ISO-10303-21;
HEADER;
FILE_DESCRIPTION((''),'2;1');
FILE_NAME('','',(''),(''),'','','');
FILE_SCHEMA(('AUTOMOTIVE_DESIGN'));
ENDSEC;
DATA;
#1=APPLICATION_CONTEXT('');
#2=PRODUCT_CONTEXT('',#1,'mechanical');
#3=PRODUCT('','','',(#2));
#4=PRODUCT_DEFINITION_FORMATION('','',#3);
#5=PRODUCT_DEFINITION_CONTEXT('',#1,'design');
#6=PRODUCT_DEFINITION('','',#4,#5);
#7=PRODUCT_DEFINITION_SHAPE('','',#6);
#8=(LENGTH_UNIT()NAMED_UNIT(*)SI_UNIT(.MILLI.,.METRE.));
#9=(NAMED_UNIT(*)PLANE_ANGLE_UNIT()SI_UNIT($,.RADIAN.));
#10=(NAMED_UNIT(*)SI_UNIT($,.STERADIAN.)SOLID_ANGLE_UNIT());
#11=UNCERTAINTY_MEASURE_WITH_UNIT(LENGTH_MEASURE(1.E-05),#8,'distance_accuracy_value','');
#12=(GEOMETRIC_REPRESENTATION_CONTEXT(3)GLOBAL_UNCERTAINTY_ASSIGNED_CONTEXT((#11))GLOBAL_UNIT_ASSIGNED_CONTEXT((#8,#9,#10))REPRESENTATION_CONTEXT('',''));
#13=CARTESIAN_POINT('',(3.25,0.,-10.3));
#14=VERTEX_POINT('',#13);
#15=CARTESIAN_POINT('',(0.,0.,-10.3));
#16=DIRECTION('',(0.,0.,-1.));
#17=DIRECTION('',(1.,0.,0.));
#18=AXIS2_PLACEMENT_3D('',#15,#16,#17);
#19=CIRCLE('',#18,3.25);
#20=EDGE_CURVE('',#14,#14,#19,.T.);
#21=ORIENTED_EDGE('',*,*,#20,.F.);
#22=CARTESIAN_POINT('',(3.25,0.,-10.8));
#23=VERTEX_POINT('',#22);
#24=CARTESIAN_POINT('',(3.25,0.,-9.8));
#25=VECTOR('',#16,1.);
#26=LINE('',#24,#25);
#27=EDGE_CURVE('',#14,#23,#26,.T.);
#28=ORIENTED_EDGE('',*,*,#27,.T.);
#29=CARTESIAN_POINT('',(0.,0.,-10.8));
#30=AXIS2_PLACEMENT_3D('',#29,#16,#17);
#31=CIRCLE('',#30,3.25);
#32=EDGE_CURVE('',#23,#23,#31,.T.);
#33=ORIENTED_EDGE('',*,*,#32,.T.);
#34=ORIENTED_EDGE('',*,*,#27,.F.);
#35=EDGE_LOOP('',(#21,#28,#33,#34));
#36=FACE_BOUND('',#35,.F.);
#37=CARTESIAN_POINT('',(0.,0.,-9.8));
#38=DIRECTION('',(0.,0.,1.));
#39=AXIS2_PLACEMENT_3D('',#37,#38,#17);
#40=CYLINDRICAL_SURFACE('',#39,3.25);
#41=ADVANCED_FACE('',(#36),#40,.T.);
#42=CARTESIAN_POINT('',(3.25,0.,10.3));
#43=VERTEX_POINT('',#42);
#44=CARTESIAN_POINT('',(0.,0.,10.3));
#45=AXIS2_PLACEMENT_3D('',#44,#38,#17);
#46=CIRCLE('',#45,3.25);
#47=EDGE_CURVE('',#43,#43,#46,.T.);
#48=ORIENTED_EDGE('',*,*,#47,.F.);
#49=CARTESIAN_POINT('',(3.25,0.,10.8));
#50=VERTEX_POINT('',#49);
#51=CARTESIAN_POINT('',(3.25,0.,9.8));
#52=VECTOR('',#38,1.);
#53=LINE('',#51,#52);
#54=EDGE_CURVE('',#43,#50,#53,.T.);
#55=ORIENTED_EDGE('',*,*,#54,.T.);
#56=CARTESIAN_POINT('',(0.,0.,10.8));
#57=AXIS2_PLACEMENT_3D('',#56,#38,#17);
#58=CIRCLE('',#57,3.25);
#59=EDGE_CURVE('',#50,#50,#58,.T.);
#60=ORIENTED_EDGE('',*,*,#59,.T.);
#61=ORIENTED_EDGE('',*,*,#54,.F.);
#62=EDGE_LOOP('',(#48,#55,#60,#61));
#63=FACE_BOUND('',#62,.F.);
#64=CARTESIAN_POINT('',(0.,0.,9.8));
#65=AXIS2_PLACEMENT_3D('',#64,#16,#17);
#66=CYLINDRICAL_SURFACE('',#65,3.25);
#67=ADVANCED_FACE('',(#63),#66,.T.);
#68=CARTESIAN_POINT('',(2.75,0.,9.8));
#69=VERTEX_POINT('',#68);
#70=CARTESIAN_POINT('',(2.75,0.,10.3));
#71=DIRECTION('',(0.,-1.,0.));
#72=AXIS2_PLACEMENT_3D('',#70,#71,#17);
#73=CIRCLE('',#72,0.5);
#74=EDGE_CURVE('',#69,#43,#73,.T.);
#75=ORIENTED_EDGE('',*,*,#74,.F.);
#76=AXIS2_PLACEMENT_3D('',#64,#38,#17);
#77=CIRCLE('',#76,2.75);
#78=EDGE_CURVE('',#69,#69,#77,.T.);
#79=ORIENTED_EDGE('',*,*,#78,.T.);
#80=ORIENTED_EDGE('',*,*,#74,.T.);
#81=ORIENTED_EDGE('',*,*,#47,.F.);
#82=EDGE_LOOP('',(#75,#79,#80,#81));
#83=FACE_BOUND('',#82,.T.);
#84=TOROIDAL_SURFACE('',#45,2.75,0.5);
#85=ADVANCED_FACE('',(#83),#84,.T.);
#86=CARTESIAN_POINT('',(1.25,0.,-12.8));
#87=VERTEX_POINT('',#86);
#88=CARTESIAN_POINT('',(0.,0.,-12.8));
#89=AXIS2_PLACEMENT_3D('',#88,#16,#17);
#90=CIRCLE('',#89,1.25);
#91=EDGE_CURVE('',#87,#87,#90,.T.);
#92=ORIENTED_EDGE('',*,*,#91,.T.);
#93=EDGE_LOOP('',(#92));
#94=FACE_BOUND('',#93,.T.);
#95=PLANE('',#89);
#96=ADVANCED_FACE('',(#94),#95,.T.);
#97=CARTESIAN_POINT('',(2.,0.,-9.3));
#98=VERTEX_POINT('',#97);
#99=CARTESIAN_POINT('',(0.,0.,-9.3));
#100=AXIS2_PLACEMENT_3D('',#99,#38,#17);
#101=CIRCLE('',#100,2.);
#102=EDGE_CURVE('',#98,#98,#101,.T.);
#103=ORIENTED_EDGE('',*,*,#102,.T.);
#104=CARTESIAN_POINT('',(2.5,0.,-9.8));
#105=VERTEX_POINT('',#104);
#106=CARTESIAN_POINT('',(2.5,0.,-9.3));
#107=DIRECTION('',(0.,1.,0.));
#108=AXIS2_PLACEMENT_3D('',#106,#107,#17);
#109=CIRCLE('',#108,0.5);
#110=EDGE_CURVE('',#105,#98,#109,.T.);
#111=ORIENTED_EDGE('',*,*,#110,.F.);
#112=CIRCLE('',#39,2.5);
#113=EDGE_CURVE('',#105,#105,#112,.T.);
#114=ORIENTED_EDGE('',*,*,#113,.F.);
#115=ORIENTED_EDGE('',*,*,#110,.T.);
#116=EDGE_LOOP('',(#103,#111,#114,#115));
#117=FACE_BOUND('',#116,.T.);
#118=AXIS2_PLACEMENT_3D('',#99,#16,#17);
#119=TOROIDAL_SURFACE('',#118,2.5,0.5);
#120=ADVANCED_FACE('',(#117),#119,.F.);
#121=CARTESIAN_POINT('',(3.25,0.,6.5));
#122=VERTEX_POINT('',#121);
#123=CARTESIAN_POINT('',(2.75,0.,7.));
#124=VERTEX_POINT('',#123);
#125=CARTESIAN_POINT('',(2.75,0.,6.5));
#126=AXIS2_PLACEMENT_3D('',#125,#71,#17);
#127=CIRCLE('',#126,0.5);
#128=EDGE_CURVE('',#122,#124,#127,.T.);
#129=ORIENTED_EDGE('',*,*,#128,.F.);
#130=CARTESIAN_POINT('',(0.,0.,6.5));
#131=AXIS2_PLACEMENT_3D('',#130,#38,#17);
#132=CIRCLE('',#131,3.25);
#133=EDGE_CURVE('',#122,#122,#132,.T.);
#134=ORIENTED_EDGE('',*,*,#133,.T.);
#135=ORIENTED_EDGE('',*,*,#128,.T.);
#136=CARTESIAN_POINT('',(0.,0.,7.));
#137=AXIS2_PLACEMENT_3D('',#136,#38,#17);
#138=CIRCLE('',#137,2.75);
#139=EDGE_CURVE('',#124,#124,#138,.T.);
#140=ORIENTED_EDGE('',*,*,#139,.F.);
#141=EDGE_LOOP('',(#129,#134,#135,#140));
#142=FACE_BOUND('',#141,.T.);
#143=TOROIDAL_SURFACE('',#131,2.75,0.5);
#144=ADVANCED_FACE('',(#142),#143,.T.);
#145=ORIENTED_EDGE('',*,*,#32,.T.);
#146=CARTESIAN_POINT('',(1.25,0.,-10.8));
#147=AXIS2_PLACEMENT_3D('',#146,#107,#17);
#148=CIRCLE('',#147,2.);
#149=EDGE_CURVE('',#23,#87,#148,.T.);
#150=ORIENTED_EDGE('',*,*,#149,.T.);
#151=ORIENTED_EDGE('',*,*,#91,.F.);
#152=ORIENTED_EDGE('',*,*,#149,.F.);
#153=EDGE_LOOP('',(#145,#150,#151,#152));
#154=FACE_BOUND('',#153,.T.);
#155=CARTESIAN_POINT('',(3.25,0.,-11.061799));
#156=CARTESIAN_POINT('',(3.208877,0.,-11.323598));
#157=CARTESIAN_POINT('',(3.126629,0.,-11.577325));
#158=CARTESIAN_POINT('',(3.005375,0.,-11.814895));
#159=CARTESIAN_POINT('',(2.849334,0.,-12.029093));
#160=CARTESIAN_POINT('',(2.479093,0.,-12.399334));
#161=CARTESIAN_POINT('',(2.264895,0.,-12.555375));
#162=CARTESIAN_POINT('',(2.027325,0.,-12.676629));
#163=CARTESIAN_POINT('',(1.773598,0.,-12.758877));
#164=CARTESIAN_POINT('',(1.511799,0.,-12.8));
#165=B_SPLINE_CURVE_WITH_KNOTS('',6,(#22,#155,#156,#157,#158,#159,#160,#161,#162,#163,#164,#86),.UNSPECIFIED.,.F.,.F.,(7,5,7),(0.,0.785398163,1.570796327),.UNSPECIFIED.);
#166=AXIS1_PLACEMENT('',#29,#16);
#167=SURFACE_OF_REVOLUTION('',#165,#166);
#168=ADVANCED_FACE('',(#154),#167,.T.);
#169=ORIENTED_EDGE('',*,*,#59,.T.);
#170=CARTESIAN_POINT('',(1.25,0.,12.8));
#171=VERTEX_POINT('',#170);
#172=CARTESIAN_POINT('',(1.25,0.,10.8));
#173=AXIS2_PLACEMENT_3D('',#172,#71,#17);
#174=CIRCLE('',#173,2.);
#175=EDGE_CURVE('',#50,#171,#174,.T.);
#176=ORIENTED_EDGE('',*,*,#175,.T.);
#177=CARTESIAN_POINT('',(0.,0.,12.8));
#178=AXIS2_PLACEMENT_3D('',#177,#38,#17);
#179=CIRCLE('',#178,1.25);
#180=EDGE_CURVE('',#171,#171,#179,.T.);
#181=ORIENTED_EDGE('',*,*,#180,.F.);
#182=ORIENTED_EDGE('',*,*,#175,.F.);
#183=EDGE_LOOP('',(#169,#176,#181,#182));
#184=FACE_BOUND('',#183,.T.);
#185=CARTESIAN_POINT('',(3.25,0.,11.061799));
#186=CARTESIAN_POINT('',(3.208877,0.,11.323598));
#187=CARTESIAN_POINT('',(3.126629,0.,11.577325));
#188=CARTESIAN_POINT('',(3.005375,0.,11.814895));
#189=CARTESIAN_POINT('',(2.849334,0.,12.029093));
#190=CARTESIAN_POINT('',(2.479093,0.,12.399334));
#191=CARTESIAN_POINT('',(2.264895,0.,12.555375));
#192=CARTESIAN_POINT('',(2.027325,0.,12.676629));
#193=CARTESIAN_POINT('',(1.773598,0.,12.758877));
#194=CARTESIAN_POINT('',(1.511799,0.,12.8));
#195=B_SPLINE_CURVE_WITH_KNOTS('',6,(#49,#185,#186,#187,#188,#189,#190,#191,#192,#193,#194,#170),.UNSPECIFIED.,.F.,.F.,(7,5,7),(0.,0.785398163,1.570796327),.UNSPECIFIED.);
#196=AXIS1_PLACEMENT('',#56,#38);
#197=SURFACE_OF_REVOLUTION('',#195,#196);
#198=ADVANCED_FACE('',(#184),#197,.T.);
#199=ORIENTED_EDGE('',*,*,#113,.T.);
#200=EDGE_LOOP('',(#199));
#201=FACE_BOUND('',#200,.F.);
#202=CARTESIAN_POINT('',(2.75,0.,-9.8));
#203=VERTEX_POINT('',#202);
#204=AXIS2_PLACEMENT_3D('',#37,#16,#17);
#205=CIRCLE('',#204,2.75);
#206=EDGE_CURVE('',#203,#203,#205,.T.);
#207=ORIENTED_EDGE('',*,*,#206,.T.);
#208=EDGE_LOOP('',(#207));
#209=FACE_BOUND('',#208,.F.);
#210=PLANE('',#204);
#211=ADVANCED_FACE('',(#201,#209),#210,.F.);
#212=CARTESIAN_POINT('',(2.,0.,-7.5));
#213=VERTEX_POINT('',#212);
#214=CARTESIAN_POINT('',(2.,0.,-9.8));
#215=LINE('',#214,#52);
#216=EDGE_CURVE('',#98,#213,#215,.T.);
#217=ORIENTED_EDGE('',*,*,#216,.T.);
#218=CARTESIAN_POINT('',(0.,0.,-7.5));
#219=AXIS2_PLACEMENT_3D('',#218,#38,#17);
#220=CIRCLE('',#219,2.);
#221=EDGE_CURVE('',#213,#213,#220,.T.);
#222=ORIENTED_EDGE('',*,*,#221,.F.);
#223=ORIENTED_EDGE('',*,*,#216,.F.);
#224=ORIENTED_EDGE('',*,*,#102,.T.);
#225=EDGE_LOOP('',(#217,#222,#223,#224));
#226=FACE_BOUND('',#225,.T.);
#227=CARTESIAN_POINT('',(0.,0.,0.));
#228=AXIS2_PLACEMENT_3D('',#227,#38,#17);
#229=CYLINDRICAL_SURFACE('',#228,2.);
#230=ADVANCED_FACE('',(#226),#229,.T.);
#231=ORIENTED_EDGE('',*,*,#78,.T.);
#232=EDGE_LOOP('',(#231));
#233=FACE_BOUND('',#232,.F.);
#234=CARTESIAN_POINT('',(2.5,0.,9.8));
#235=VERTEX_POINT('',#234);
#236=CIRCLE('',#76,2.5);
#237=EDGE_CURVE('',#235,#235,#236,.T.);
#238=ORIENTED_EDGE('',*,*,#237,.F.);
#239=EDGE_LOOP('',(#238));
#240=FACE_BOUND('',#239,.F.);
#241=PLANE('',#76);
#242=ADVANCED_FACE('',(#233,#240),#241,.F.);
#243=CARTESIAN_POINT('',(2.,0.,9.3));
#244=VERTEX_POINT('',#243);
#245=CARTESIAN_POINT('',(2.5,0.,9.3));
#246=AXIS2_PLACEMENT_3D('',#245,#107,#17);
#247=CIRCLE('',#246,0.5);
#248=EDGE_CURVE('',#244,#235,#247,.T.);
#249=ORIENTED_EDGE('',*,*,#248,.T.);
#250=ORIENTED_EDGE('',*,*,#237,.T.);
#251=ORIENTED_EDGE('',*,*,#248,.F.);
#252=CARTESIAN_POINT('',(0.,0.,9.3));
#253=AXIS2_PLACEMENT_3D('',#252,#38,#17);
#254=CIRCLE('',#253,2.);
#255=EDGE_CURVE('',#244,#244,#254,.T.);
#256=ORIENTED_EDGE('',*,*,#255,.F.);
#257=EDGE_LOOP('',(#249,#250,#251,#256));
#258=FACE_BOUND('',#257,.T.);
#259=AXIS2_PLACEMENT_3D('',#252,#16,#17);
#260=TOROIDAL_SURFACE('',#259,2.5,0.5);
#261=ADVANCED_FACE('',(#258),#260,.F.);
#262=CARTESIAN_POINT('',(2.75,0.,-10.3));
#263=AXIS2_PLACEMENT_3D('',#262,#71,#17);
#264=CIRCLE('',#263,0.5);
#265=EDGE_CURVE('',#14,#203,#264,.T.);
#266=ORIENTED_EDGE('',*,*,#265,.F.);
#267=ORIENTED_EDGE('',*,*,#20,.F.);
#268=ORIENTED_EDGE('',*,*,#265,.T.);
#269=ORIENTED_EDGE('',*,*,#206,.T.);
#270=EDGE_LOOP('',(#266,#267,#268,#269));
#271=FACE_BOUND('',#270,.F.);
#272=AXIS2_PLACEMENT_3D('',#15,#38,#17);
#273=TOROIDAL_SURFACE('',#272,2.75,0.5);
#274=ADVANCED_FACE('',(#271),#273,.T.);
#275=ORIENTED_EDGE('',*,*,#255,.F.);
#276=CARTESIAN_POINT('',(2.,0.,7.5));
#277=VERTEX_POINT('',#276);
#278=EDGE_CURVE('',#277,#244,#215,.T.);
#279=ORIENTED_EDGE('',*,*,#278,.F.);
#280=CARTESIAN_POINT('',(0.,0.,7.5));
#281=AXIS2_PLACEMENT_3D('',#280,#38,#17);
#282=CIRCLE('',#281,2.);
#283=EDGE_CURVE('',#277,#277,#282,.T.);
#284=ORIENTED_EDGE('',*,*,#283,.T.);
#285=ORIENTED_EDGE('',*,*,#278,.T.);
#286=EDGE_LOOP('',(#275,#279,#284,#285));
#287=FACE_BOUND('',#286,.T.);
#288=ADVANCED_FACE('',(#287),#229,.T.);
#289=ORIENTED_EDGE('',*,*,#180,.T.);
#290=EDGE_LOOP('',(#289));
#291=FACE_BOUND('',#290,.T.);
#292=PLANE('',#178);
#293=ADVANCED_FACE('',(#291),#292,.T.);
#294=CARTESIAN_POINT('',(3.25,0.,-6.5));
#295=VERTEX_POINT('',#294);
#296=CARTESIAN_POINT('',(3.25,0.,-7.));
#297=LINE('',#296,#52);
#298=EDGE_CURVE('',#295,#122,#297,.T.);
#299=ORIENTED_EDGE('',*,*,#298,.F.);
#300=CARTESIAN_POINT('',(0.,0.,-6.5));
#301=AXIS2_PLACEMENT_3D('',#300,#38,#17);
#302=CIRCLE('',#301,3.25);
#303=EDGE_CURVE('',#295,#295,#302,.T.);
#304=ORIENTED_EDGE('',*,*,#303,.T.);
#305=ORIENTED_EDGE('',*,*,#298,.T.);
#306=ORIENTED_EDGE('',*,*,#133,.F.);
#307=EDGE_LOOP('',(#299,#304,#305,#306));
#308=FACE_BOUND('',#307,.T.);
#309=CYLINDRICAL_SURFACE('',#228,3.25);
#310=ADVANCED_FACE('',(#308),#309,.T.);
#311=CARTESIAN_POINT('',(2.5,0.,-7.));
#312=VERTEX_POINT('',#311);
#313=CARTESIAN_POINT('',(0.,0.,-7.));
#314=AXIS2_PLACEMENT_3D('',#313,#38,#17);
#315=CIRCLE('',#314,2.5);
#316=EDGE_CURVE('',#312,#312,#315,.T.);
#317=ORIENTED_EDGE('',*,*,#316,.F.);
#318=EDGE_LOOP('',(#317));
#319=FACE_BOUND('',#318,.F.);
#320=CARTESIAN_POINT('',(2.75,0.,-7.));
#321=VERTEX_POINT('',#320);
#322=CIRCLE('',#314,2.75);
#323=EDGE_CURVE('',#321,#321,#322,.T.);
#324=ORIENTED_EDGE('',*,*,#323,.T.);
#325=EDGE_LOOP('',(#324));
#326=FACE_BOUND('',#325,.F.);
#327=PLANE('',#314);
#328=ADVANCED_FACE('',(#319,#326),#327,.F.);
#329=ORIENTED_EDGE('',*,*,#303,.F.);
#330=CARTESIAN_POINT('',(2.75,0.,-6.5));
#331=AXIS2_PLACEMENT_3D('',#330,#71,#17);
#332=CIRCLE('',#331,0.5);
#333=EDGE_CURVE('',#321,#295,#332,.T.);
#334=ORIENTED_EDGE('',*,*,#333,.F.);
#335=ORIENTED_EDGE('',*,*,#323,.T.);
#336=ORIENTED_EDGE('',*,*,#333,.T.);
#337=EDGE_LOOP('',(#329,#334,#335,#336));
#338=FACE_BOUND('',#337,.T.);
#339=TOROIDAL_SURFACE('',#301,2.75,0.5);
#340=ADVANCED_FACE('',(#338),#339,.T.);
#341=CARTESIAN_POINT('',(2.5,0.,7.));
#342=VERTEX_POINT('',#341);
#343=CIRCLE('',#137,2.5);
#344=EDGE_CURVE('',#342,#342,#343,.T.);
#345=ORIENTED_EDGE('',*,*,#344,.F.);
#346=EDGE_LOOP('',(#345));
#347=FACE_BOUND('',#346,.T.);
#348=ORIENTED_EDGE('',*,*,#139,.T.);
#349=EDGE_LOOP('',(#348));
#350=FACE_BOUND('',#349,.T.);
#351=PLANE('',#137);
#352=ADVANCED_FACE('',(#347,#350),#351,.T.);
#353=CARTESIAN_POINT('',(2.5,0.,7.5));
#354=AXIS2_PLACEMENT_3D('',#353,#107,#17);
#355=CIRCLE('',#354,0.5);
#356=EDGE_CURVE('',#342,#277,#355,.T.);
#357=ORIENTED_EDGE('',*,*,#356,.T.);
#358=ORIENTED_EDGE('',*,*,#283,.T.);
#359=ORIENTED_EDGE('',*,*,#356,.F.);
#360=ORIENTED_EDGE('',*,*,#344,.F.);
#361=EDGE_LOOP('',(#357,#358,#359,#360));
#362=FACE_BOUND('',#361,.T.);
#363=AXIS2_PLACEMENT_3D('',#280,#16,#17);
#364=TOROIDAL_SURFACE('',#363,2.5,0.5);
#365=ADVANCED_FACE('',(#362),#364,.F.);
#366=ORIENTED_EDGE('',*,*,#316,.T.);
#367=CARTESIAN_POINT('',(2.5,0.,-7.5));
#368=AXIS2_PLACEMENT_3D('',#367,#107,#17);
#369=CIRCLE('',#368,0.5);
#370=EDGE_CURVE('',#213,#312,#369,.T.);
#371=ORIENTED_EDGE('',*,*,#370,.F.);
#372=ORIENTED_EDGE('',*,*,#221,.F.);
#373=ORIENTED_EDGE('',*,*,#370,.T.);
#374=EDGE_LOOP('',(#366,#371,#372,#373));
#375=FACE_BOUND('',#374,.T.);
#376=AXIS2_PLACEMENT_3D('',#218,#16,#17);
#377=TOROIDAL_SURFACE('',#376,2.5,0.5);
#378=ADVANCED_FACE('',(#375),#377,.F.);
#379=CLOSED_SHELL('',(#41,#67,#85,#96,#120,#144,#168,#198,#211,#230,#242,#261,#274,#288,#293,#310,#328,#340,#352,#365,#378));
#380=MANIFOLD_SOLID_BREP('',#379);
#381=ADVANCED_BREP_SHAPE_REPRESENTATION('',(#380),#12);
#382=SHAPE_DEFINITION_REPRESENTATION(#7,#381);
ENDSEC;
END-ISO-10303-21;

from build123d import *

# Parameters (mm, degrees)
F0_R          = 2
F1_DEPTH      = 9.8
F1_DEPTH_BACK = 9.8
F0_R_2        = 3.25
F2_DEPTH      = 7
F2_DEPTH_BACK = 7
F4_R          = 3.25
F5_DEPTH      = 3
F3_R          = 3.25
F6_DEPTH      = 3
F7_R          = 2
F8_R          = 0.5


with BuildPart() as f1:
    # F0 (on Top) → F1 (new body, two sides)
    with BuildSketch(Plane.XY) as f1_sk:
        Circle(F0_R)
    extrude(amount=F1_DEPTH)
    extrude(f1_sk.sketch, amount=-F1_DEPTH_BACK)

    # F0 (on Top) → F2 (join, two sides)
    with BuildSketch(Plane.XY) as f2_sk:
        Circle(F0_R_2)
        Circle(F0_R, mode=Mode.SUBTRACT)
    extrude(amount=F2_DEPTH)
    extrude(f2_sk.sketch, amount=-F2_DEPTH_BACK)

    # F4 (on face) → F5 (join)
    with BuildSketch(Plane.XY.offset(9.8)):
        Circle(F4_R)
    extrude(amount=F5_DEPTH)

    # F3 (on face) → F6 (join)
    with BuildSketch(Plane(origin=(0, 0, -9.8), x_dir=(1, 0, 0), z_dir=(0, 0, -1))):
        Circle(F3_R)
    extrude(amount=F6_DEPTH)

    # F7
    f7_edges = [f1.edges().sort_by_distance(p)[0] for p in [
        (-3.25, 0, 12.8),
        (-3.25, 0, -12.8),
    ]]
    fillet(f7_edges, radius=F7_R)

    # F8
    f8_edges = [f1.edges().sort_by_distance(p)[0] for p in [
        (-3.25, 0, 7),
        (-3.25, 0, -7),
        (-2, 0, -9.8),
        (-2, 0, -7),
        (-2, 0, 9.8),
        (-2, 0, 7),
        (-3.25, 0, 9.8),
        (-3.25, 0, -9.8),
    ]]
    fillet(f8_edges, radius=F8_R)


solid = f1.part
